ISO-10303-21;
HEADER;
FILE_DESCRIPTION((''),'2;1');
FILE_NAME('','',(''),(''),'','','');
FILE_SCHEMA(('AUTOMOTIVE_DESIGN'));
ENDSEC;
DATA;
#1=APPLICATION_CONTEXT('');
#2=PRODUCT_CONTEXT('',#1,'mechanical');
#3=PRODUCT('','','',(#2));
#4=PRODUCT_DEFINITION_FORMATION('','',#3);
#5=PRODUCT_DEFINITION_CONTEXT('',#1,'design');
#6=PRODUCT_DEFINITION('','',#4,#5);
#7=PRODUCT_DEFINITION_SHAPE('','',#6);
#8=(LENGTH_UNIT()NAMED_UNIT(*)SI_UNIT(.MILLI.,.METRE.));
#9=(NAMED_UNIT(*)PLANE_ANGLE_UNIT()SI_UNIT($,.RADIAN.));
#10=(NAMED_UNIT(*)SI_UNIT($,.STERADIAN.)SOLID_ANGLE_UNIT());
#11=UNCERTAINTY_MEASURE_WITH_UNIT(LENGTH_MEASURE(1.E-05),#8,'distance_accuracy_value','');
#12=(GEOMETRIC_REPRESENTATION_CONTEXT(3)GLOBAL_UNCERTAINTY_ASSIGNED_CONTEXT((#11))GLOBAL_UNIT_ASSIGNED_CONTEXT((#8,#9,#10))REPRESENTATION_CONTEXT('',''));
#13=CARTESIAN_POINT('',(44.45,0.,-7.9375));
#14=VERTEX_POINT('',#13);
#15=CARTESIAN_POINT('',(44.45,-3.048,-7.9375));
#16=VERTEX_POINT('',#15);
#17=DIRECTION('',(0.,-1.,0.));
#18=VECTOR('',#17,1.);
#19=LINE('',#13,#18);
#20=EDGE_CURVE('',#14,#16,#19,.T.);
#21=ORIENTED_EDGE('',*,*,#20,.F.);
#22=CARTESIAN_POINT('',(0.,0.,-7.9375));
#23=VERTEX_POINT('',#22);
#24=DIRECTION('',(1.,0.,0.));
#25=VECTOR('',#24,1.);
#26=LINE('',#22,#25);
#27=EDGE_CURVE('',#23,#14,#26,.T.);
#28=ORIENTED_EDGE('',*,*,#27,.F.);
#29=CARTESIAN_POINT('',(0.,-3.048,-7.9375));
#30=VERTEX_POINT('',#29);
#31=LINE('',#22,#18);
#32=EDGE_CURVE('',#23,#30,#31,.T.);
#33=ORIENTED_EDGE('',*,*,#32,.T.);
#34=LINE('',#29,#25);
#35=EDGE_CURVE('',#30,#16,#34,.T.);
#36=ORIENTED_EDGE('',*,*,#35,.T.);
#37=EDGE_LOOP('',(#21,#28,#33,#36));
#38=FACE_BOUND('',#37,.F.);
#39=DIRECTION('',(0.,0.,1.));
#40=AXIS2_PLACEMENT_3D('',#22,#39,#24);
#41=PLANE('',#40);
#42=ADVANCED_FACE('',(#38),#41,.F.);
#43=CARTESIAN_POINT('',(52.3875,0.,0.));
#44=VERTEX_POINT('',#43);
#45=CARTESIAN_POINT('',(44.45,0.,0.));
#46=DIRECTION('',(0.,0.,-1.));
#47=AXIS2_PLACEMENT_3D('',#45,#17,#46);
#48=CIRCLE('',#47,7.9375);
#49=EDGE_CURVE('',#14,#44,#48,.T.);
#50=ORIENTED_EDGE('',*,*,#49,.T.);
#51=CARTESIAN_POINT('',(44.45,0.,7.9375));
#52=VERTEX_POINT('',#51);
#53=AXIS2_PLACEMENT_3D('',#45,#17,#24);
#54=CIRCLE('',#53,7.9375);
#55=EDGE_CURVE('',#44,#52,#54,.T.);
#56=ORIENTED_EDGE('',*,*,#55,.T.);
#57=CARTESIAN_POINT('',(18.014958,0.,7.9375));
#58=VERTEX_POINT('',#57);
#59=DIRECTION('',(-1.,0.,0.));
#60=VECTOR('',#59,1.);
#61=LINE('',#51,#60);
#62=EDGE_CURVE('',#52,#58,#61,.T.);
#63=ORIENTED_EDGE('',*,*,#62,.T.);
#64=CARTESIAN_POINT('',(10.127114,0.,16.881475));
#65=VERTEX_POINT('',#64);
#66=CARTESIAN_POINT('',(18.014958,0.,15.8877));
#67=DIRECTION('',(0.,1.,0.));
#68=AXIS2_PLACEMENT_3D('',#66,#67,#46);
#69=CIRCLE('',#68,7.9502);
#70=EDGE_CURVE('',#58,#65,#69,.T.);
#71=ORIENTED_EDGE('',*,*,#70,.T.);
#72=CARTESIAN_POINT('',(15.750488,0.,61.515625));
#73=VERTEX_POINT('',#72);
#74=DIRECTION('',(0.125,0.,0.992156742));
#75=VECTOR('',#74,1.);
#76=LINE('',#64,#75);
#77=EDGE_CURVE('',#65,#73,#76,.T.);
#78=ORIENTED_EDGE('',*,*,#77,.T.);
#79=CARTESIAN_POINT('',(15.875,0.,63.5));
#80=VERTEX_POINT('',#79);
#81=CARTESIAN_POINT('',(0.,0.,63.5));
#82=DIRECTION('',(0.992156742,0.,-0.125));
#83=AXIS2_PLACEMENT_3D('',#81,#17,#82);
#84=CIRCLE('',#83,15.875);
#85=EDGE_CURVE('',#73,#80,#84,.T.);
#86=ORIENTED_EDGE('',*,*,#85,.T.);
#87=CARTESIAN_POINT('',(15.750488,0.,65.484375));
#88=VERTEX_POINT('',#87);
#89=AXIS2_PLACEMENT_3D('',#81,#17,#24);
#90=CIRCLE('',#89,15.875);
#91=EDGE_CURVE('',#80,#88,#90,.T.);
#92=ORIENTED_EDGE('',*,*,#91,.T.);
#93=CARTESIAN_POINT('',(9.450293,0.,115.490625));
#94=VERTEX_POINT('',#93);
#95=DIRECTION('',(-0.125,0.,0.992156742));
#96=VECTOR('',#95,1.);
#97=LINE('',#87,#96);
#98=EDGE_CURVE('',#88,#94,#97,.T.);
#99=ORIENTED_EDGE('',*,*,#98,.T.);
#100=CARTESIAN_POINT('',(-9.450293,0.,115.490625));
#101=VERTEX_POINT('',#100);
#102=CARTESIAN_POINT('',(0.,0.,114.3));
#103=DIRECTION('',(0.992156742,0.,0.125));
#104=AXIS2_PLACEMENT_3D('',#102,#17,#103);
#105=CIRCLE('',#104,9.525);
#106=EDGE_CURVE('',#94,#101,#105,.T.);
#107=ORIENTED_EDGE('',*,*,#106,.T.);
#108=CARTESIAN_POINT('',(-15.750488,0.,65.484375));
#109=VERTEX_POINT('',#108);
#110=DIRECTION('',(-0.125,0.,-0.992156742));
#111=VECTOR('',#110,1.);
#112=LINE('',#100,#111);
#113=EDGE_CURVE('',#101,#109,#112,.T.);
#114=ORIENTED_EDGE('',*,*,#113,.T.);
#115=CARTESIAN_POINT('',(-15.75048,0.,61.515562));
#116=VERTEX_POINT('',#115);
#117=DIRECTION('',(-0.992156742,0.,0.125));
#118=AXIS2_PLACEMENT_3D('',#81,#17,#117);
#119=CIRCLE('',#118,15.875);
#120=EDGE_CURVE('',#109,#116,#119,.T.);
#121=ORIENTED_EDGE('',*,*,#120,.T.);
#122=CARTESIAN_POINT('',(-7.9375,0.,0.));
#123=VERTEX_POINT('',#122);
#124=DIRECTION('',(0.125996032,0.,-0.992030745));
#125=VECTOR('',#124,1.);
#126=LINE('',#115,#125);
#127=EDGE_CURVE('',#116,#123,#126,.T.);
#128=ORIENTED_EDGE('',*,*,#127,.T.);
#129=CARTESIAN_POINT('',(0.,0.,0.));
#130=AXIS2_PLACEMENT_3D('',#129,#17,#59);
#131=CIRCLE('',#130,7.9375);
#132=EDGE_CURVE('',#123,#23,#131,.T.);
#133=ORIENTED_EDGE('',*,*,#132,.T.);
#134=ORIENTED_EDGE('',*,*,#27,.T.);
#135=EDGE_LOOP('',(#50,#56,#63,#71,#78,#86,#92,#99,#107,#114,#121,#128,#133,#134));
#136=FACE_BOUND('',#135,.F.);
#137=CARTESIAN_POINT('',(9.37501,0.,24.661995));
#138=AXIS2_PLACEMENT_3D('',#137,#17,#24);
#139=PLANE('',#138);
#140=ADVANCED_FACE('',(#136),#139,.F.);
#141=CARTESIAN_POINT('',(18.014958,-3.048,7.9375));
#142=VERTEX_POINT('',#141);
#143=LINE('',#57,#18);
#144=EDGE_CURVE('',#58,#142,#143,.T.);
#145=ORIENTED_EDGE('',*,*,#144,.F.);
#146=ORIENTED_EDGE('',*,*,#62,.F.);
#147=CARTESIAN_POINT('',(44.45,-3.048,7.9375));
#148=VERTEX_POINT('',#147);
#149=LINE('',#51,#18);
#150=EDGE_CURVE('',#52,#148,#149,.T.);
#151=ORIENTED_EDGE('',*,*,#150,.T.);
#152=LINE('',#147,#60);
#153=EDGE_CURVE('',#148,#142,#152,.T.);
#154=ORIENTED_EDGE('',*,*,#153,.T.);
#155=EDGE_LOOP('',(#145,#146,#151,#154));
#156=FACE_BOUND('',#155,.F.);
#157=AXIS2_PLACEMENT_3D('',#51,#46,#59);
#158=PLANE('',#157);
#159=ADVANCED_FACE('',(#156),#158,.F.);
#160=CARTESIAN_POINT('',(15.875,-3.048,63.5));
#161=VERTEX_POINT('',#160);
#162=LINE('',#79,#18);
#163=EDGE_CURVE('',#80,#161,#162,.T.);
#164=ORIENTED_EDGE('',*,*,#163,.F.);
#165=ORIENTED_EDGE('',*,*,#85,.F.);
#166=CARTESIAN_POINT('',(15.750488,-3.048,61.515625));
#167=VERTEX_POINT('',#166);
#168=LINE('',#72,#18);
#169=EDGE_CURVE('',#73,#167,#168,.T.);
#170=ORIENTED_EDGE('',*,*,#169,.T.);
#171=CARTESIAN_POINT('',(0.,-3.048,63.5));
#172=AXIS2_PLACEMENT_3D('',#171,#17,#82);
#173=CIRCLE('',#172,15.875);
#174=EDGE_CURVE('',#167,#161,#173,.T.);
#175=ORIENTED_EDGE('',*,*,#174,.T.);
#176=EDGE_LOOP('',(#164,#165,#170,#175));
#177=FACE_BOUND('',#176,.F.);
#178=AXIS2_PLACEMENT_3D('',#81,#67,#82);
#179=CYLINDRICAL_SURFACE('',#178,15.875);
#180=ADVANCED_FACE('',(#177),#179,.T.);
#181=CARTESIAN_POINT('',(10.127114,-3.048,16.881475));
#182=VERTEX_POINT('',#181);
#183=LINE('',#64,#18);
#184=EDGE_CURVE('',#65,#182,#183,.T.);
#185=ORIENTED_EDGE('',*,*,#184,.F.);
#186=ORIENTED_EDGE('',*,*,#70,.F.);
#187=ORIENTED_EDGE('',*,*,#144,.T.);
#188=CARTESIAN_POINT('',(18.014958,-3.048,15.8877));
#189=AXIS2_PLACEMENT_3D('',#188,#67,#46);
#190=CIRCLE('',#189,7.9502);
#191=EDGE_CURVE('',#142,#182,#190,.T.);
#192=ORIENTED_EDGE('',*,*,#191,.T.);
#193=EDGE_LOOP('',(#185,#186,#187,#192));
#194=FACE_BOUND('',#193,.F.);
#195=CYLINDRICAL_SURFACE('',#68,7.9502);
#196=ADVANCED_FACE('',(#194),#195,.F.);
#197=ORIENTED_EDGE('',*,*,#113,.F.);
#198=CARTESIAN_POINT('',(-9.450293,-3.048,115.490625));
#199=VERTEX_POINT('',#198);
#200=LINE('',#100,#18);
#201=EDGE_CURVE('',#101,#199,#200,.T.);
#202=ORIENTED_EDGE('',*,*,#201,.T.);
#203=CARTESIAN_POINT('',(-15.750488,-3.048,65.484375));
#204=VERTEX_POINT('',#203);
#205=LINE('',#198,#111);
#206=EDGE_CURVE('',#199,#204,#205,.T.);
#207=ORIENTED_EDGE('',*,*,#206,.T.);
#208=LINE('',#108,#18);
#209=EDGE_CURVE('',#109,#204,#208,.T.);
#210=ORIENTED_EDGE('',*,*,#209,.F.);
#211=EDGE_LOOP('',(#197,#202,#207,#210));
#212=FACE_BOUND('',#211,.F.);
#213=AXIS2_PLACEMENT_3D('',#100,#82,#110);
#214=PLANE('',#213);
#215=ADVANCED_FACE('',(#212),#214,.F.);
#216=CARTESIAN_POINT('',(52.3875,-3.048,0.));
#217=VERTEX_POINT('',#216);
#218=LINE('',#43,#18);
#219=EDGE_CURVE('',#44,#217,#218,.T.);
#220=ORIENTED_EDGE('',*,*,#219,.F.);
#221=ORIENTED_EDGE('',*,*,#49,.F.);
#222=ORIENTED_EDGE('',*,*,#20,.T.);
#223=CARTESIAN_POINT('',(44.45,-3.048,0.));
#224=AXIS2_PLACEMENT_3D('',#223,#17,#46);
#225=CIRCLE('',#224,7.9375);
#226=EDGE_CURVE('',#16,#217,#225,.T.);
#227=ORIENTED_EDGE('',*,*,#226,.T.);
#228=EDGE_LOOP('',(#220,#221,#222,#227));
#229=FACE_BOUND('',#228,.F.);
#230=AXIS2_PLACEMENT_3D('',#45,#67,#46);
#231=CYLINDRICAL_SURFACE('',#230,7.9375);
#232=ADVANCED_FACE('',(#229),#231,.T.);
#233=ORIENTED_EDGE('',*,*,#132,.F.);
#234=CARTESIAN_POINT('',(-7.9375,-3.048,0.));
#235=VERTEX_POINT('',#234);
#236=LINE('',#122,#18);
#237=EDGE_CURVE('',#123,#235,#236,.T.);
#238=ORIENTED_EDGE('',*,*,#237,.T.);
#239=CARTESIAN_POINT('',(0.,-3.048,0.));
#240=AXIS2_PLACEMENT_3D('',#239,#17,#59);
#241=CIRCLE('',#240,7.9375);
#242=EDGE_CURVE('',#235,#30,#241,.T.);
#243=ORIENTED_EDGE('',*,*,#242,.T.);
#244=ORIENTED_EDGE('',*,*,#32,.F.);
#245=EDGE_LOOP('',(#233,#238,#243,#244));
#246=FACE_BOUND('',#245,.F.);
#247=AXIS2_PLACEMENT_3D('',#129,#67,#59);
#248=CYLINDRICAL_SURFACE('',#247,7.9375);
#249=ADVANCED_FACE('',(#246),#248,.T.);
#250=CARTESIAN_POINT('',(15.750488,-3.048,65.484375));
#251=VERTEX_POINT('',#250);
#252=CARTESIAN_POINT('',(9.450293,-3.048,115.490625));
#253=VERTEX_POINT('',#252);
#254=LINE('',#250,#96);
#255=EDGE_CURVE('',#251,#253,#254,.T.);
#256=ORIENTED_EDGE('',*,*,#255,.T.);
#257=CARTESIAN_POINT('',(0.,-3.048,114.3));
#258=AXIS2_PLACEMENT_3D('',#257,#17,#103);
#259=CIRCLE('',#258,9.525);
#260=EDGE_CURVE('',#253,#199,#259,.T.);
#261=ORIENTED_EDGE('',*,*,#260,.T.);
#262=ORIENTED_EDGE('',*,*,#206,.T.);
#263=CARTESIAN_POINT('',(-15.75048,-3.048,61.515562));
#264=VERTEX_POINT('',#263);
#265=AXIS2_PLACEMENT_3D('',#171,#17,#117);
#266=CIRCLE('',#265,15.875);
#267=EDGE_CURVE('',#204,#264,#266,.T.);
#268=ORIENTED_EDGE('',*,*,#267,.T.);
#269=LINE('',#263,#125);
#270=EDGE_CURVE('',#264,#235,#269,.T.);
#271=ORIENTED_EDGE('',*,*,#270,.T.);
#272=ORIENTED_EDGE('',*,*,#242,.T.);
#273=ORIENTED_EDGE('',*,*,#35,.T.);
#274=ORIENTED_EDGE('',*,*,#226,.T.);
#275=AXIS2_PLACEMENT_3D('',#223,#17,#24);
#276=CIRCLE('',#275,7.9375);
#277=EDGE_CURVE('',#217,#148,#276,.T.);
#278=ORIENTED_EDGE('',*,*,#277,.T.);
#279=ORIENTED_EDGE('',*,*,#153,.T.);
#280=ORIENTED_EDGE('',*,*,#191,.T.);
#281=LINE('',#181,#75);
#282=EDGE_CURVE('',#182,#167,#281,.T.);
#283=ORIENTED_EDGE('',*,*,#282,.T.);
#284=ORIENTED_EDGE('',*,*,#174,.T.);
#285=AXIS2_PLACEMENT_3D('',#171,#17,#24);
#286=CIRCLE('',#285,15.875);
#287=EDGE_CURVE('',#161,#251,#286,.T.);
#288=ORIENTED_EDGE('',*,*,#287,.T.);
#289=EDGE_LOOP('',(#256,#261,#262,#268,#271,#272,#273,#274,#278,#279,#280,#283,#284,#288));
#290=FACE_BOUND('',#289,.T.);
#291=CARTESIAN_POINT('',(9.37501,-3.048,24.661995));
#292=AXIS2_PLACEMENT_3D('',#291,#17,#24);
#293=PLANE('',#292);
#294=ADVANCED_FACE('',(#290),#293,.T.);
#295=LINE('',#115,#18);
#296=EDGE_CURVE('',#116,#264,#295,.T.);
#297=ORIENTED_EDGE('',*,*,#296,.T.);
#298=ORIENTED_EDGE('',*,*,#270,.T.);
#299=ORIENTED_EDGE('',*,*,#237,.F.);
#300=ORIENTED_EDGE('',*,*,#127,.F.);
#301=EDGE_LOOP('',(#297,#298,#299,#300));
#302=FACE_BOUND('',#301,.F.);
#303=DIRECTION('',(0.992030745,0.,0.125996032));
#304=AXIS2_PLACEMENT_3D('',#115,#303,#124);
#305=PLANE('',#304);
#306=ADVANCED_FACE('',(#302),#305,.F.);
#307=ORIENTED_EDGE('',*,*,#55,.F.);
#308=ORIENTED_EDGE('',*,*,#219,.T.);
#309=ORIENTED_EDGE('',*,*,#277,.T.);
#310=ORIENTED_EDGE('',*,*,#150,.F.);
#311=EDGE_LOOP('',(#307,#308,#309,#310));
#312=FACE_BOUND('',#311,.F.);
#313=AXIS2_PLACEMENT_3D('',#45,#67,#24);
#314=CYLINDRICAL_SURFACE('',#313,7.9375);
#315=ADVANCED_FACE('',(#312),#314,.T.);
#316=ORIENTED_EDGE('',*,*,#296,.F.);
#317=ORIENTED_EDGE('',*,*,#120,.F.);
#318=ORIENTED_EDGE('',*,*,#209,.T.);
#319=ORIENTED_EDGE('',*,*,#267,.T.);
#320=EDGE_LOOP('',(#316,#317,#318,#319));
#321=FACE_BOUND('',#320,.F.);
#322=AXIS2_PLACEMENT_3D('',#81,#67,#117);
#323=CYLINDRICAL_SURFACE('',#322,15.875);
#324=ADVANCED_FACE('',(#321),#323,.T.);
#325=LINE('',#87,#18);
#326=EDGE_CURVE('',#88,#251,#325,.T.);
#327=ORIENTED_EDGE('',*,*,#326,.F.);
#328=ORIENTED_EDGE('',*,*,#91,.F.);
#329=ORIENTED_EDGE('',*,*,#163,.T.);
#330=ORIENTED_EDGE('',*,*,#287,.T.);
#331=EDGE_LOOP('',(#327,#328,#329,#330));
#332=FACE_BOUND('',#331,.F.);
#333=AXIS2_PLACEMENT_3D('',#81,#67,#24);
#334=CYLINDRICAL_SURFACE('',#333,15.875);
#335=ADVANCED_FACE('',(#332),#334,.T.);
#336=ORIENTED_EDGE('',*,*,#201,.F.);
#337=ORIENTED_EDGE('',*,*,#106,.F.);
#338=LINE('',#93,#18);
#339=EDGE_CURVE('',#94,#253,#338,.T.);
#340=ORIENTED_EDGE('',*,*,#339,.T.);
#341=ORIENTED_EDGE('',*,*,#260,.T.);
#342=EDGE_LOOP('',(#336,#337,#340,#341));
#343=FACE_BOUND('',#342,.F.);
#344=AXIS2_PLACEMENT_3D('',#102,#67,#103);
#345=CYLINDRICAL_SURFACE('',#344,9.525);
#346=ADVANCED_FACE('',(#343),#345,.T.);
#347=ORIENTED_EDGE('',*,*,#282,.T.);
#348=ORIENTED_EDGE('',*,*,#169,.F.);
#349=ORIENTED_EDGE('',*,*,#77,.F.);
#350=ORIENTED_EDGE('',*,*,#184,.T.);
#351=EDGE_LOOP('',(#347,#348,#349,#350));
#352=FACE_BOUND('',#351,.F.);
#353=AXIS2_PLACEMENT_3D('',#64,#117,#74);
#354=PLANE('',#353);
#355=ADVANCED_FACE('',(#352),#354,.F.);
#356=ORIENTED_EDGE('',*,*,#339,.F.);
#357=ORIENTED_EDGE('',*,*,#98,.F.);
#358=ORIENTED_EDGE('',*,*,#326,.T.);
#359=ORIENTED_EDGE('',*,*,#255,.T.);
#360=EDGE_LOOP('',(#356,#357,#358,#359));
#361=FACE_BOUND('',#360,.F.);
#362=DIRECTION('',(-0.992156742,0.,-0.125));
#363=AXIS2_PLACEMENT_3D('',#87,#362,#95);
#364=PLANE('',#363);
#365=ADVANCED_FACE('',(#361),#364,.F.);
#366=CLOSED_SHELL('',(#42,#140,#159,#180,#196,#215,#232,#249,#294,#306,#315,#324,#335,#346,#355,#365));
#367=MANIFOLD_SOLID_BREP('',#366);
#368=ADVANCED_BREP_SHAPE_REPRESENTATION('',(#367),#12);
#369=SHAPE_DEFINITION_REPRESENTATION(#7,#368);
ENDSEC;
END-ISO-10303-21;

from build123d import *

# Parameters (mm, degrees)
F0_R     = 3.175
F1_DEPTH = 3.048


# Not quite as in the source:
# - ends of sketch curves that miss each other by under 0.0002 mm in the source are joined


with BuildPart() as f1:
    # F0 (on Front) → F1 (new body)
    with BuildSketch(Plane.XZ):
        with BuildLine():
            ThreePointArc((-7.9375, 0), (0, 7.9375), (7.9375, 0))
            ThreePointArc((7.9375, 0), (5.6126600757, -5.6126600757), (0, -7.9375))
            Line((0, -7.9375), (44.45, -7.9375))
            ThreePointArc((44.45, -7.9375), (36.5125, 0), (44.45, 7.9375))
            Line((44.45, 7.9375), (18.0149584735, 7.9375))
            ThreePointArc((18.0149584735, 7.9375), (12.0523084735, 10.6291369817), (10.127113946, 16.881475))
            Line((10.127113946, 16.881475), (15.7504882737, 61.515625))
            ThreePointArc((15.7504882737, 61.515625), (15.8438414904, 62.5058612634), (15.875, 63.5))
            ThreePointArc((15.875, 63.5), (15.8438414904, 64.4941387366), (15.7504882737, 65.484375))
            ThreePointArc((15.7504882737, 65.484375), (0, 79.375), (-15.7504882737, 65.484375))
            ThreePointArc((-15.7504882737, 65.484375), (-15.875, 63.4999684915), (-15.7504803964, 61.5155624772))
            Line((-15.7504803964, 61.5155624772), (-7.9375, 0))
        make_face()
        with Locations((0, 63.5)):
            Circle(F0_R, mode=Mode.SUBTRACT)
        with BuildLine():
            Line((-9.4502929642, 115.490625), (-15.7504882737, 65.484375))
            ThreePointArc((-15.7504882737, 65.484375), (0, 79.375), (15.7504882737, 65.484375))
            Line((15.7504882737, 65.484375), (9.4502929642, 115.490625))
            ThreePointArc((9.4502929642, 115.490625), (9.5063048942, 114.896483242), (9.525, 114.3))
            ThreePointArc((9.525, 114.3), (-0.596483242, 104.7936951058), (-9.4502929642, 115.490625))
        make_face()
        with Locations((-3.175, 100.0252)):
            Circle(F0_R, mode=Mode.SUBTRACT)
        with BuildLine():
            ThreePointArc((9.4502929642, 115.490625), (0, 123.825), (-9.4502929642, 115.490625))
            ThreePointArc((-9.4502929642, 115.490625), (-0.596483242, 104.7936951058), (9.525, 114.3))
            ThreePointArc((9.525, 114.3), (9.5063048942, 114.896483242), (9.4502929642, 115.490625))
        make_face()
        with Locations((0, 114.3)):
            Circle(F0_R, mode=Mode.SUBTRACT)
        with BuildLine():
            ThreePointArc((0, -7.9375), (5.6126600757, -5.6126600757), (7.9375, 0))
            ThreePointArc((7.9375, 0), (0, 7.9375), (-7.9375, 0))
            ThreePointArc((-7.9375, 0), (-5.6126600757, -5.6126600757), (0, -7.9375))
        make_face()
        Circle(F0_R, mode=Mode.SUBTRACT)
        with BuildLine():
            ThreePointArc((44.45, 7.9375), (36.5125, 0), (44.45, -7.9375))
            ThreePointArc((44.45, -7.9375), (50.0626600757, -5.6126600757), (52.3875, 0))
            ThreePointArc((52.3875, 0), (50.0626600757, 5.6126600757), (44.45, 7.9375))
        make_face()
        with Locations((44.45, 0)):
            Circle(F0_R, mode=Mode.SUBTRACT)
        with Locations((44.45, 0)):
            Circle(F0_R)
        with Locations((0, 63.5)):
            Circle(F0_R)
        with Locations((-3.175, 100.0252)):
            Circle(F0_R)
        with Locations((0, 114.3)):
            Circle(F0_R)
        Circle(F0_R)
    extrude(amount=F1_DEPTH)


solid = f1.part
